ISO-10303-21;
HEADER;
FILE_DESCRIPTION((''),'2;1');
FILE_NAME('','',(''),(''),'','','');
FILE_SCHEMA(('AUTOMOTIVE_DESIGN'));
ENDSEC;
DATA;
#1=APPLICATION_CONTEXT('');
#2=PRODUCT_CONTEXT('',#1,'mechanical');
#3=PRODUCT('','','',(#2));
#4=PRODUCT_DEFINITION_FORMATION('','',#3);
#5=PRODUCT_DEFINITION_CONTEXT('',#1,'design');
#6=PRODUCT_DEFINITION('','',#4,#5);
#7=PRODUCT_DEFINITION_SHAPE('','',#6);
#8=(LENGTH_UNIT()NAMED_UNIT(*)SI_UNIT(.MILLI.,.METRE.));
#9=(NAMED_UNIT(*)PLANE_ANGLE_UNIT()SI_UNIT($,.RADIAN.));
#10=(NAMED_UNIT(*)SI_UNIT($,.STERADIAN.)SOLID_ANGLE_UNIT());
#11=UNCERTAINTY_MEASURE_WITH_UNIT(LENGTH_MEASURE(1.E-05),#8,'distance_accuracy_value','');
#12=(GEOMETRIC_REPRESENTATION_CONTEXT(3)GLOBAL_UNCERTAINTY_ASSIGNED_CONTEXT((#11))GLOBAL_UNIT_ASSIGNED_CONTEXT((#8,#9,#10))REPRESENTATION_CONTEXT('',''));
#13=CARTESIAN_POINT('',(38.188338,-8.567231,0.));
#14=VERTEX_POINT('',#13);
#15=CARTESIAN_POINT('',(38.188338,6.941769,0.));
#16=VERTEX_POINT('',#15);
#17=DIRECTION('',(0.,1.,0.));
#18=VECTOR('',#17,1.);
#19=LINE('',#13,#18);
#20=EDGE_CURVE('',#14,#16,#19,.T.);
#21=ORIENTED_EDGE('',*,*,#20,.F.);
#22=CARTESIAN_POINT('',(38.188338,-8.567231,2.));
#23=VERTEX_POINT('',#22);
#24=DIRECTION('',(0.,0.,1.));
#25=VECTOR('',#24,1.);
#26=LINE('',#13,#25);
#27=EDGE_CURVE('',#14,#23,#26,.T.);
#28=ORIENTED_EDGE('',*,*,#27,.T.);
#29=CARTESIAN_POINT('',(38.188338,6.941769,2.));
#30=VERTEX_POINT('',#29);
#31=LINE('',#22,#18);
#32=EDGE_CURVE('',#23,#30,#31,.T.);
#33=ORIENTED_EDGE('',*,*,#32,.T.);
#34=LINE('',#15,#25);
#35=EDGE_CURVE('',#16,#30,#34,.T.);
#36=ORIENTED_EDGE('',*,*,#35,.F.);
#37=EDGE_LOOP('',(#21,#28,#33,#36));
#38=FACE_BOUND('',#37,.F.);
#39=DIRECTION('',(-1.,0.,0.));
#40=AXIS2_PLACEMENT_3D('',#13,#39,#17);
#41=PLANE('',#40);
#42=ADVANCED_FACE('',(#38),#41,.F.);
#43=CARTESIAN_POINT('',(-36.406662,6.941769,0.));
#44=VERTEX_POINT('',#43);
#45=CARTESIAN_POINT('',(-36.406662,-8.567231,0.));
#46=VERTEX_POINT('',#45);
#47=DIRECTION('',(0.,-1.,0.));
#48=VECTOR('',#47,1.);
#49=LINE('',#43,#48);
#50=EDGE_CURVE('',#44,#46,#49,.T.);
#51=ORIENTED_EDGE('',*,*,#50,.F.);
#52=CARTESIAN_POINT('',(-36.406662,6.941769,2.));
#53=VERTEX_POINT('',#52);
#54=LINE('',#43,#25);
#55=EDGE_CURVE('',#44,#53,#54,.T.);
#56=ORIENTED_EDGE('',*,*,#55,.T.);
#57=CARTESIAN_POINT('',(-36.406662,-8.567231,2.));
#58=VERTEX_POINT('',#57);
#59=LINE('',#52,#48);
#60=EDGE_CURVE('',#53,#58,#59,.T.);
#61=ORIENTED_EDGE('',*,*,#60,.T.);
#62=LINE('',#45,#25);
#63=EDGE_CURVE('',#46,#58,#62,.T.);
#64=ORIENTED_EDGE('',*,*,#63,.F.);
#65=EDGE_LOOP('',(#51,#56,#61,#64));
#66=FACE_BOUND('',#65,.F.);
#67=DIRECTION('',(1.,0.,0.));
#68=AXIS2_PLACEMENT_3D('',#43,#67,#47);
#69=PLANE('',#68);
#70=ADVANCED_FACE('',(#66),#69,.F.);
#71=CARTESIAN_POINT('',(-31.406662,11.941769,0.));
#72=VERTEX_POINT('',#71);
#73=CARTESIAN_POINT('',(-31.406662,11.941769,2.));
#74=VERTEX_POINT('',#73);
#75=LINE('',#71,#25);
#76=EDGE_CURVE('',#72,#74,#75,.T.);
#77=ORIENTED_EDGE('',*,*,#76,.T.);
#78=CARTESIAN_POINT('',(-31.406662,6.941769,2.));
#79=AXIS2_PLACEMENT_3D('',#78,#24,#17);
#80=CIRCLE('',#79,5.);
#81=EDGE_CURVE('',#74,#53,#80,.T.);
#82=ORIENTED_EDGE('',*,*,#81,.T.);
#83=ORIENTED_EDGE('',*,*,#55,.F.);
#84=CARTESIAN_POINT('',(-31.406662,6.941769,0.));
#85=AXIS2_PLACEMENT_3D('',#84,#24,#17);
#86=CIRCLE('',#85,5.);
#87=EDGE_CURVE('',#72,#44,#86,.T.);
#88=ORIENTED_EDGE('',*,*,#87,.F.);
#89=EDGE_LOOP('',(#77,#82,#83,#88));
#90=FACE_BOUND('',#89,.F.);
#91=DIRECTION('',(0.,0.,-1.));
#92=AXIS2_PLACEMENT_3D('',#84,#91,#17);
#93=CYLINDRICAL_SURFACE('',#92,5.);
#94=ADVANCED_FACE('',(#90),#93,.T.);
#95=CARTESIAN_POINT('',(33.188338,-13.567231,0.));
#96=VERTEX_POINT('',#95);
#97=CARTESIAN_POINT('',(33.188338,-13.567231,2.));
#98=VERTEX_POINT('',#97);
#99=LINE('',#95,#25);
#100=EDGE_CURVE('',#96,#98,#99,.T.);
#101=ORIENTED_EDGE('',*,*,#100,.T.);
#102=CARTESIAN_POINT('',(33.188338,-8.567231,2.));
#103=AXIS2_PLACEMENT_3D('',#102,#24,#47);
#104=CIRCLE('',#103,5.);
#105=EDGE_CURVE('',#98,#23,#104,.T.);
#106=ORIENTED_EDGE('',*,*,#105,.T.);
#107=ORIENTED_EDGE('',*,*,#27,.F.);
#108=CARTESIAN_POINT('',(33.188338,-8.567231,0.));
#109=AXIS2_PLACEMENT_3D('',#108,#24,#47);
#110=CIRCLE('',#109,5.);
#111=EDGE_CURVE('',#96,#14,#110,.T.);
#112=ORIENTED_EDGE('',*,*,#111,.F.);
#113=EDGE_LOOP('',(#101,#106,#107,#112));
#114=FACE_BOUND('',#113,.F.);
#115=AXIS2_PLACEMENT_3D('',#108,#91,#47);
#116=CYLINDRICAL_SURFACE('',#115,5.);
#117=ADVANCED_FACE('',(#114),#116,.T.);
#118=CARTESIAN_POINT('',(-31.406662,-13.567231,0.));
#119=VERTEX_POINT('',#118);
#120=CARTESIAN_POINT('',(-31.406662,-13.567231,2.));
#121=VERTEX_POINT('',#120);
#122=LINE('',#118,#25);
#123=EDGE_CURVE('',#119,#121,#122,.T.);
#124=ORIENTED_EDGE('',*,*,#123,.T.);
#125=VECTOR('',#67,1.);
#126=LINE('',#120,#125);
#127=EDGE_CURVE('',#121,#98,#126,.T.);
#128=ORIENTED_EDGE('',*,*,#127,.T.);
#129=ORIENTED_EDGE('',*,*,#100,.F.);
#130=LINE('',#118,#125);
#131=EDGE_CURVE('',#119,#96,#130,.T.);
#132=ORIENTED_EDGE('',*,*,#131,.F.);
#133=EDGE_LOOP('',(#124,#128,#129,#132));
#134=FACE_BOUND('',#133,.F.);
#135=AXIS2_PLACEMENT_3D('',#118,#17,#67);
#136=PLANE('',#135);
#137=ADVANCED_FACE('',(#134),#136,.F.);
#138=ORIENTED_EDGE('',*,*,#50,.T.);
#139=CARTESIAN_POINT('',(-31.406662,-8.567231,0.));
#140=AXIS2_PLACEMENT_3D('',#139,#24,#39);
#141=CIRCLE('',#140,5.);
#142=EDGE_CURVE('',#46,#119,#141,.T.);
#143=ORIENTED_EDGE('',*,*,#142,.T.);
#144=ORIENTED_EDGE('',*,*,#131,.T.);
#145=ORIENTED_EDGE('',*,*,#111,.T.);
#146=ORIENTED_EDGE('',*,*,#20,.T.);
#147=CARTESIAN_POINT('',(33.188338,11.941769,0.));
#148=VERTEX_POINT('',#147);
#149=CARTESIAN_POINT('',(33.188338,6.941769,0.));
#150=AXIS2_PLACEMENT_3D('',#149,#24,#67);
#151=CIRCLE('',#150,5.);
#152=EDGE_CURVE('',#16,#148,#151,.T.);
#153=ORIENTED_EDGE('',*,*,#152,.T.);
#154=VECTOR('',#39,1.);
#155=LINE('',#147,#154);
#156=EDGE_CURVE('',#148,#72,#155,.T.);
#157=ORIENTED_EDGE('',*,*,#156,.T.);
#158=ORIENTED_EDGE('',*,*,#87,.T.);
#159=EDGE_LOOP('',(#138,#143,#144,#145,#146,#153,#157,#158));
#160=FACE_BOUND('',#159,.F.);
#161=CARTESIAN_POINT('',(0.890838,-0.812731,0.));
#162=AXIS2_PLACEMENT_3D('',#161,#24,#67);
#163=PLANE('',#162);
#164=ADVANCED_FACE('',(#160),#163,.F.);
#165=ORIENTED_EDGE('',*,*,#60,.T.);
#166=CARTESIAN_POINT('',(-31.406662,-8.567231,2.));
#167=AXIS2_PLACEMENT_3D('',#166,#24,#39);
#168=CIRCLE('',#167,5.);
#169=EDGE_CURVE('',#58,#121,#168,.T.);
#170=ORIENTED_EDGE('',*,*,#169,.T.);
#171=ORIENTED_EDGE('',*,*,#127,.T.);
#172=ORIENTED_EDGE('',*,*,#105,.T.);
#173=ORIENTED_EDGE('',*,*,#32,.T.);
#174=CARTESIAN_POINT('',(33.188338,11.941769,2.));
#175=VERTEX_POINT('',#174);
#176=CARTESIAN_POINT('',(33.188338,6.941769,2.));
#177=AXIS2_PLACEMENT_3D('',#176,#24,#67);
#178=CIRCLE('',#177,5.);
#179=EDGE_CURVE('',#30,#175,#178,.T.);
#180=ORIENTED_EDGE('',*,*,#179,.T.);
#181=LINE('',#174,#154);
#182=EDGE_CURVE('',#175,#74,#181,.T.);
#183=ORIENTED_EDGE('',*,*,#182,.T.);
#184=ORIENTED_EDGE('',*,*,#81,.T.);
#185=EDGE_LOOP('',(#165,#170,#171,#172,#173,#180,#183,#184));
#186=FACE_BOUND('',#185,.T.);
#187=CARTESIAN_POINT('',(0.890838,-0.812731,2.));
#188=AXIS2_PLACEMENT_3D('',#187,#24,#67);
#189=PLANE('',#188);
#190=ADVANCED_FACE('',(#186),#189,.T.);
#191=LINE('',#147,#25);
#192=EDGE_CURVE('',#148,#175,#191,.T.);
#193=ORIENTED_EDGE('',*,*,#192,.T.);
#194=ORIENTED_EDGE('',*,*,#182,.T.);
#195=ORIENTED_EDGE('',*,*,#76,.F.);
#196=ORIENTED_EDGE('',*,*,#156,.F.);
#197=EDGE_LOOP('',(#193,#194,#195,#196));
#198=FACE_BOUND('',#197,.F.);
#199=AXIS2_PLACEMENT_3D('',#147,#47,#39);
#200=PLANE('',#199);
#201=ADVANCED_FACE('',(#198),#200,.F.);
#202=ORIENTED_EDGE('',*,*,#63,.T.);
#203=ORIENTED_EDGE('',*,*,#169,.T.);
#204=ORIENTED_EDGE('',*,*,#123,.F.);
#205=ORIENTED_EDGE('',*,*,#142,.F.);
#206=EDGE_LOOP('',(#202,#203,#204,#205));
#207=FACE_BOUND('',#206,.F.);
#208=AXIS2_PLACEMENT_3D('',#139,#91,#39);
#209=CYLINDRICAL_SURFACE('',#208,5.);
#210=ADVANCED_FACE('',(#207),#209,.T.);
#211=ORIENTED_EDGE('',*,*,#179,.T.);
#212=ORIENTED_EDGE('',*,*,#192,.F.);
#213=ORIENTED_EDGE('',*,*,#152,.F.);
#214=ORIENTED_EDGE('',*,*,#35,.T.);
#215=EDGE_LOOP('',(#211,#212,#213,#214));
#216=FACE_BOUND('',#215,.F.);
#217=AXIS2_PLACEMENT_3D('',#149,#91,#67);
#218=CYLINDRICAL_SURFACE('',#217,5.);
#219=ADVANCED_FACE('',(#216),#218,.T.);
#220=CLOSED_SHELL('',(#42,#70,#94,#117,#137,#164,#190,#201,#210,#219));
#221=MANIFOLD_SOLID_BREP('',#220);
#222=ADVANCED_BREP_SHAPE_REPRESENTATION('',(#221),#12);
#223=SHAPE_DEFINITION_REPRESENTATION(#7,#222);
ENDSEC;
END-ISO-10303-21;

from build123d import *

# Parameters (mm, degrees)
F1_DEPTH = 2


# Not quite as in the source:
# - the program builds the solid bodies; features that only make, move or delete a surface that nothing else refers to are left out


with BuildPart() as f1:
    # F0 (on Top) → F1 (new body)
    with BuildSketch(Plane.XY):
        with BuildLine():
            Line((33.1883379823, 11.9417690091), (-31.4066620177, 11.9417690091))
            ThreePointArc((-31.4066620177, 11.9417690091), (-34.9421959236, 10.477302915), (-36.4066620177, 6.9417690091))
            Line((-36.4066620177, 6.9417690091), (-36.4066620177, -8.5672309909))
            ThreePointArc((-36.4066620177, -8.5672309909), (-34.9421959236, -12.1027648969), (-31.4066620177, -13.5672309909))
            Line((-31.4066620177, -13.5672309909), (33.1883379823, -13.5672309909))
            ThreePointArc((33.1883379823, -13.5672309909), (36.7238718882, -12.1027648969), (38.1883379823, -8.5672309909))
            Line((38.1883379823, -8.5672309909), (38.1883379823, 6.9417690091))
            ThreePointArc((38.1883379823, 6.9417690091), (36.7238718882, 10.477302915), (33.1883379823, 11.9417690091))
        make_face()
    extrude(amount=F1_DEPTH)


solid = f1.part
